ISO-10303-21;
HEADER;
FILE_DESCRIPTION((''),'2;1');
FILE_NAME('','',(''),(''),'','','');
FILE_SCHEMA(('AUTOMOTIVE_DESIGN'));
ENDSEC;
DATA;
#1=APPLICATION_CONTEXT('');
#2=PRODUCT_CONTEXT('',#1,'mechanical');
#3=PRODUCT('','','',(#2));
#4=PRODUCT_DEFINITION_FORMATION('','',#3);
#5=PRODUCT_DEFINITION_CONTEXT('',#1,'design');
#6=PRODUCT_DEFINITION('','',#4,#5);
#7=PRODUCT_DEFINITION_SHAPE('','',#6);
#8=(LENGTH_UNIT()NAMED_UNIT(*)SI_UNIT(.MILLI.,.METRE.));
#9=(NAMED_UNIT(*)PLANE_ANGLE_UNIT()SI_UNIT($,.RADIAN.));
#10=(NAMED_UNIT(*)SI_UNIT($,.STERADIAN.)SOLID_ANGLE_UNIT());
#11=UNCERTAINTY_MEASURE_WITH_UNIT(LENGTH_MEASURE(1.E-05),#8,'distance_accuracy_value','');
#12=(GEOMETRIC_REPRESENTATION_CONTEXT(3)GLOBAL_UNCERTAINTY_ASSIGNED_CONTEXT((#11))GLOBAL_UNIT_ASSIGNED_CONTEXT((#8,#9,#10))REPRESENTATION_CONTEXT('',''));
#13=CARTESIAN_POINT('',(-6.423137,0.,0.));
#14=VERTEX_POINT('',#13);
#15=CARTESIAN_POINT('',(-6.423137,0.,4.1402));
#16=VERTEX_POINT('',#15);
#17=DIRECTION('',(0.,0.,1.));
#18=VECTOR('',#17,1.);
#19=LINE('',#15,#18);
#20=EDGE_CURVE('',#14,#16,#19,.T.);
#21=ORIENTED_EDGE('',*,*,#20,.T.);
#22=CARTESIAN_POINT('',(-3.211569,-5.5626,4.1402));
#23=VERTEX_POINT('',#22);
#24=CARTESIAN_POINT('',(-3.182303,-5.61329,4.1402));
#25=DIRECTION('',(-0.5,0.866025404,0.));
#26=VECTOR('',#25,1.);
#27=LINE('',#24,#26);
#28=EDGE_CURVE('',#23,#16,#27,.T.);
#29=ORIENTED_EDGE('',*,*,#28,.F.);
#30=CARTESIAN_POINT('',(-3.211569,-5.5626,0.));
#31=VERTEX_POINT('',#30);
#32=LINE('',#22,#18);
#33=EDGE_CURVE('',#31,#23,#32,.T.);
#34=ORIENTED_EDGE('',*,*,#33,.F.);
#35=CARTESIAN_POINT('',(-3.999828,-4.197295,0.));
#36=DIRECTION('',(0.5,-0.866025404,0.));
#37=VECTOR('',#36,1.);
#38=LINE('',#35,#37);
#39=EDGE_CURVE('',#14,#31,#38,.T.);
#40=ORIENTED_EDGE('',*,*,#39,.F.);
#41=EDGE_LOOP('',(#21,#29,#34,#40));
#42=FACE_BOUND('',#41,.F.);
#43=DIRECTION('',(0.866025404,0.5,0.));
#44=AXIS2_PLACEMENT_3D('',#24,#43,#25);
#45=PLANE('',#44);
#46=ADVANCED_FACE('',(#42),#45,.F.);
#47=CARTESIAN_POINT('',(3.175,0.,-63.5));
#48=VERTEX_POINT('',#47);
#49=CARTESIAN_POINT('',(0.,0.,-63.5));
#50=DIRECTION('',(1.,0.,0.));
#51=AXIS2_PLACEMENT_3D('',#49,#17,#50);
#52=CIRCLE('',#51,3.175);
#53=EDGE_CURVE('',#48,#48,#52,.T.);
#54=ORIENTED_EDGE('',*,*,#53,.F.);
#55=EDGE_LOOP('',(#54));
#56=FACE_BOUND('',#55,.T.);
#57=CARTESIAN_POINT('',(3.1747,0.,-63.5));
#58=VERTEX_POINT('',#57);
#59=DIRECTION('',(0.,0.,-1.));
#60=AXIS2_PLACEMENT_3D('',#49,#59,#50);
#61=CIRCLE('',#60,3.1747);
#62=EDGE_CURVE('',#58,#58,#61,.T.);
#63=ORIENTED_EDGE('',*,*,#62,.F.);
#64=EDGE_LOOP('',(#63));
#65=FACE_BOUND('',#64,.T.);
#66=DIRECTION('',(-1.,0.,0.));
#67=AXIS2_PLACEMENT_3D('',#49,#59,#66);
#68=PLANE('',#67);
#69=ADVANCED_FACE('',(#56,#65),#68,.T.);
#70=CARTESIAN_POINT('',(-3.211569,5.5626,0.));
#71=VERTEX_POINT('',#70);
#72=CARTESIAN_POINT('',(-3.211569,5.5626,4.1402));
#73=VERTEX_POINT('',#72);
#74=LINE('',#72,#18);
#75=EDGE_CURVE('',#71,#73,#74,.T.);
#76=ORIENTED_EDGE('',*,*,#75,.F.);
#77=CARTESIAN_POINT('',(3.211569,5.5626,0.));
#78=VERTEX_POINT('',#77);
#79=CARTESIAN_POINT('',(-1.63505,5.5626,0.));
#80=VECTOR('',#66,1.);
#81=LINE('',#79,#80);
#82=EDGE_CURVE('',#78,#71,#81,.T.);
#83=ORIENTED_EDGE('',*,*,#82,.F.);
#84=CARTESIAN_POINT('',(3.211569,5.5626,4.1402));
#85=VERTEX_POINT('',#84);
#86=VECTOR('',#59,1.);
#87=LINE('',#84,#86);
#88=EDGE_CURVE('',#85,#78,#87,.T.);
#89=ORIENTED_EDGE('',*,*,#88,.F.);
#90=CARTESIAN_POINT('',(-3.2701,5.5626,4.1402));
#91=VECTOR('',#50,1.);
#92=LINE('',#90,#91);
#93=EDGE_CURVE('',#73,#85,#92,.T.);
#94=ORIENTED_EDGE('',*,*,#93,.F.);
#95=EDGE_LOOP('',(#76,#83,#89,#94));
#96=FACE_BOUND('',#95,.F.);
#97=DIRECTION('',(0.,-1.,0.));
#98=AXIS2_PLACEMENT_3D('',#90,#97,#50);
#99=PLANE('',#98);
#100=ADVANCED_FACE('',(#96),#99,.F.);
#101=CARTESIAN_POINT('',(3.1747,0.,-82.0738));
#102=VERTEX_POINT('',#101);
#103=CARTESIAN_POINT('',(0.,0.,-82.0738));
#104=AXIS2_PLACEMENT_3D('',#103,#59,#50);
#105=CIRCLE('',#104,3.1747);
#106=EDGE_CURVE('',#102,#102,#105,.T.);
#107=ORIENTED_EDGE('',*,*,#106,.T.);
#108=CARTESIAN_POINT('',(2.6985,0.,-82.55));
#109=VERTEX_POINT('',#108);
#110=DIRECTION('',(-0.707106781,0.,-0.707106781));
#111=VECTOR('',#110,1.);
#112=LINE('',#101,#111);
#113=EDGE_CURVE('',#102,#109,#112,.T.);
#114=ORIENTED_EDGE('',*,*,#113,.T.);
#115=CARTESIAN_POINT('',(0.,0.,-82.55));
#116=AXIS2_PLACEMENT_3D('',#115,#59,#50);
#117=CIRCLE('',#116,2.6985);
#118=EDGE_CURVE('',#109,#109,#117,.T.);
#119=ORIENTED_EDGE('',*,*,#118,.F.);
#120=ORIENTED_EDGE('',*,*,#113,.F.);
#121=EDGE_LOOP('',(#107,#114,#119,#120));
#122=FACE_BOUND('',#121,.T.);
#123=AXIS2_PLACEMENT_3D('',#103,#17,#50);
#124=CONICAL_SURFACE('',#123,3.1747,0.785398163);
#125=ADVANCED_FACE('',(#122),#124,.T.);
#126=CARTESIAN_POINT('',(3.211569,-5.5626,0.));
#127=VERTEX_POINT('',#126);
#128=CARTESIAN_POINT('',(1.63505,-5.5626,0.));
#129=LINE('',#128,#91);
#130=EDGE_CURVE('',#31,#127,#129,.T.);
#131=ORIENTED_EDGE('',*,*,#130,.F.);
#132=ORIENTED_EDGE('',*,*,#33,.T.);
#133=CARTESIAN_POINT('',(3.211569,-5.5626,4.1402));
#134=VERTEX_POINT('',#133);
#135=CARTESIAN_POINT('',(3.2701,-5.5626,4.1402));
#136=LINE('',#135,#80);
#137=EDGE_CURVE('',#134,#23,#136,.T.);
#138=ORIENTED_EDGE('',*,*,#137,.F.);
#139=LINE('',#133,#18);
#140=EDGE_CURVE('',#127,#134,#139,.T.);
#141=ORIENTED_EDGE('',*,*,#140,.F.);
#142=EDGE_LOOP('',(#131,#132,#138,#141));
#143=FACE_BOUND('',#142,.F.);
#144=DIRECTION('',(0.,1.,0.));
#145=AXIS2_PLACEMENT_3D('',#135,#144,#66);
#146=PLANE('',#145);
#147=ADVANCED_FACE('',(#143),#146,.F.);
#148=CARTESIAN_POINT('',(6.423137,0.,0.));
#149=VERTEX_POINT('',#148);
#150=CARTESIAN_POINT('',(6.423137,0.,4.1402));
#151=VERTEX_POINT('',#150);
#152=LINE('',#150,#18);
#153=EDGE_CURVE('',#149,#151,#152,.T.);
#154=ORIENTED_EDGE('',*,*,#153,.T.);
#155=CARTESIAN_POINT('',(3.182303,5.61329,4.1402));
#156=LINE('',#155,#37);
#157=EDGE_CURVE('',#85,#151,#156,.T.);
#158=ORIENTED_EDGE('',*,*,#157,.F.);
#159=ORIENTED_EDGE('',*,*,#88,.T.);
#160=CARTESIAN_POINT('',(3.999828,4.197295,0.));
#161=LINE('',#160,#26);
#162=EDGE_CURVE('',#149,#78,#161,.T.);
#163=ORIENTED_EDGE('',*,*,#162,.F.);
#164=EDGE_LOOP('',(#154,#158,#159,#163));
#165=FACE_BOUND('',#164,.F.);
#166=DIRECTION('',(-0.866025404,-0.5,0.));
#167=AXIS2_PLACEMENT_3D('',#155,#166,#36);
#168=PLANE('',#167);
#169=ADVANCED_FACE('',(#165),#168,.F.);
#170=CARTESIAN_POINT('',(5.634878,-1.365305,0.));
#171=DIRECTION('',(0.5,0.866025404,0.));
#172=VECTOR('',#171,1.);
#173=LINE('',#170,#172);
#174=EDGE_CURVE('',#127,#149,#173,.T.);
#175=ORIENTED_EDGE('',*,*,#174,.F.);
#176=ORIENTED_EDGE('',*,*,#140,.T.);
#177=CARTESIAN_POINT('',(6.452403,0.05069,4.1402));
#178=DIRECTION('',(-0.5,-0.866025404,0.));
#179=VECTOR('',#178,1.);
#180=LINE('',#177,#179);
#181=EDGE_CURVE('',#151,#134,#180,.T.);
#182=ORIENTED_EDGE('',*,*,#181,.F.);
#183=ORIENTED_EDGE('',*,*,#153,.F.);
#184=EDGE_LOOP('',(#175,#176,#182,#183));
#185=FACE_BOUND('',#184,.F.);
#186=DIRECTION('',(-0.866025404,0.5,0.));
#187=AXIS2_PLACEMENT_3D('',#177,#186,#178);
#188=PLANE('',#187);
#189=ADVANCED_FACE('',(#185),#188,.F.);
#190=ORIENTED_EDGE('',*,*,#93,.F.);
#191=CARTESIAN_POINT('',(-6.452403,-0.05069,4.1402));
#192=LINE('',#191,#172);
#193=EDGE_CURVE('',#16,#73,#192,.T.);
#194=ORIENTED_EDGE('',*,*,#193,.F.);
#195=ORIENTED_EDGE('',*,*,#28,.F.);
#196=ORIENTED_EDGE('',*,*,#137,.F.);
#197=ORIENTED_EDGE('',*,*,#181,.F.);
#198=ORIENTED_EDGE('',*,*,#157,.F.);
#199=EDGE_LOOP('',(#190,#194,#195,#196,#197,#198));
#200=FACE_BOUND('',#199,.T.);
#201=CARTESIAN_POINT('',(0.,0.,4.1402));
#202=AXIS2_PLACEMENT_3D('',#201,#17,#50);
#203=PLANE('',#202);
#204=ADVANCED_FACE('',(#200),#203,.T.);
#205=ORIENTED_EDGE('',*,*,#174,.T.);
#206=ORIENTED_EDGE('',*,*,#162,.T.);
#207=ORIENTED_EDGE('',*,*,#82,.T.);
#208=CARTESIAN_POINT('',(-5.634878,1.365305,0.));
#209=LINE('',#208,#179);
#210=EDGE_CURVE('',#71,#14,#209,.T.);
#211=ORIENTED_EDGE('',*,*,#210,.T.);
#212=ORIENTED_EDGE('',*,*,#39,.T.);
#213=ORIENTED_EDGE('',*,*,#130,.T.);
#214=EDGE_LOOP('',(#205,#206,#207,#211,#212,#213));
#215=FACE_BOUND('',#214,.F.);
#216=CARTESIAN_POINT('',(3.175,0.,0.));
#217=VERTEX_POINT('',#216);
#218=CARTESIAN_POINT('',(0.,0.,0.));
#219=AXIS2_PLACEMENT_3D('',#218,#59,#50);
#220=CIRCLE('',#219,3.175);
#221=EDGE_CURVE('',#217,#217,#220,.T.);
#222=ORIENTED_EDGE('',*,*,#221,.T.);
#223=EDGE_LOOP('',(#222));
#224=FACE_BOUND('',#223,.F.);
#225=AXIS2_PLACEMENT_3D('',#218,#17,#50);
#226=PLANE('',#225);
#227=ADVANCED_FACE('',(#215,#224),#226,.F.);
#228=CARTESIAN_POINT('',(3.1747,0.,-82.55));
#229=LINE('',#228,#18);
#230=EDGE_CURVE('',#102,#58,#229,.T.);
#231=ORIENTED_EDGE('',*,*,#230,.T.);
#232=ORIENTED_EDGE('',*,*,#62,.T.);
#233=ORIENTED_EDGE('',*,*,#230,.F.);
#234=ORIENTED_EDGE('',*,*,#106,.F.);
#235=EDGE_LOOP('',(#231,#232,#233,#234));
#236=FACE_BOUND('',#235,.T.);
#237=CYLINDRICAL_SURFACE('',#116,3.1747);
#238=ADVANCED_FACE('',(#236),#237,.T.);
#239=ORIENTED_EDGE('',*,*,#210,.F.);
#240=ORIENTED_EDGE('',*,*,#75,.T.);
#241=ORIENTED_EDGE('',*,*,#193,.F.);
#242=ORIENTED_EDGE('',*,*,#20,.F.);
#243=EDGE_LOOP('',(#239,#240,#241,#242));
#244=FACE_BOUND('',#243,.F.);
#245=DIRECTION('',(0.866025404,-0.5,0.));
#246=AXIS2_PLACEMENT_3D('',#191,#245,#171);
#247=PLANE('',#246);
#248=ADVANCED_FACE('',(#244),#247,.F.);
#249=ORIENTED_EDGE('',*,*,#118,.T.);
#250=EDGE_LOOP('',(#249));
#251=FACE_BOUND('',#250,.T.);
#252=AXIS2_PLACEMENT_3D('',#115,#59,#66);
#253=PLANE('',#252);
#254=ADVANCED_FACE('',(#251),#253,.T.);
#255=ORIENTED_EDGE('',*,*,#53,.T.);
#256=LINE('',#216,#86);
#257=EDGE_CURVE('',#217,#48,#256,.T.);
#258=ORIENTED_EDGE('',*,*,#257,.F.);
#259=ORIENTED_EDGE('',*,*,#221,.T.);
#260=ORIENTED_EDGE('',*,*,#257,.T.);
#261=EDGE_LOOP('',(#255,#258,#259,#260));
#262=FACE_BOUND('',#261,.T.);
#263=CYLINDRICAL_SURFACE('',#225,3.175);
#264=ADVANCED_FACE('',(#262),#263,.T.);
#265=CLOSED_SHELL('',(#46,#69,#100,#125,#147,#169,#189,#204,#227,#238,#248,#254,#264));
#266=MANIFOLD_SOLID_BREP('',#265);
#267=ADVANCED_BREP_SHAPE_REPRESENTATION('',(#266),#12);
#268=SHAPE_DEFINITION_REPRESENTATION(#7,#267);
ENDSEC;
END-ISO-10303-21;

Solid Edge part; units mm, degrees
sketch "Sketch1" plane through (0, 0, 0) normal (0, 0, 1) x (1, 0, 0)
  circle A0 centre (0, 0) radius 6.4526
  dimension "D1" = 12.9052
extrude "Protrusion1" add sketch "Sketch1" along normal blind 4.1402
sketch "Sketch2" plane through (0, 0, 0) normal (0, 0, -1) x (1, 0, 0)
  circle A0 centre (0, 0) radius 3.175
extrude "Protrusion2" add sketch "Sketch2" along normal blind 82.55
sketch "Sketch3" plane through (0, 0, -82.55) normal (0, 0, -1) x (1, 0, 0)
  circle A0 centre (0, 0) radius 3.1747
extrude "Cutout1" cut sketch "Sketch3" against normal blind 19.05 flip side to cut
chamfer "Chamfer_1" distance 0.4762 angle 45 1 edges at (-3.1747, 0, -82.55)
sketch "Sketch4" plane through (0, 0, 4.1402) normal (0, 0, 1) x (1, 0, 0)
  line L0 (-3.2701, 5.5626) -> (3.2701, 5.5626)
  dimension "D1" = 11.1252
extrude "Cutout2" cut sketch "Sketch4" against normal up to next material side at (0, 5.6126, 4.1402)
pattern_circular "Pattern1" count 6 over 360 about axis through (0, 0, 4.1402) along (0, 0, 1) of "Cutout2"
properties part number "113702"
